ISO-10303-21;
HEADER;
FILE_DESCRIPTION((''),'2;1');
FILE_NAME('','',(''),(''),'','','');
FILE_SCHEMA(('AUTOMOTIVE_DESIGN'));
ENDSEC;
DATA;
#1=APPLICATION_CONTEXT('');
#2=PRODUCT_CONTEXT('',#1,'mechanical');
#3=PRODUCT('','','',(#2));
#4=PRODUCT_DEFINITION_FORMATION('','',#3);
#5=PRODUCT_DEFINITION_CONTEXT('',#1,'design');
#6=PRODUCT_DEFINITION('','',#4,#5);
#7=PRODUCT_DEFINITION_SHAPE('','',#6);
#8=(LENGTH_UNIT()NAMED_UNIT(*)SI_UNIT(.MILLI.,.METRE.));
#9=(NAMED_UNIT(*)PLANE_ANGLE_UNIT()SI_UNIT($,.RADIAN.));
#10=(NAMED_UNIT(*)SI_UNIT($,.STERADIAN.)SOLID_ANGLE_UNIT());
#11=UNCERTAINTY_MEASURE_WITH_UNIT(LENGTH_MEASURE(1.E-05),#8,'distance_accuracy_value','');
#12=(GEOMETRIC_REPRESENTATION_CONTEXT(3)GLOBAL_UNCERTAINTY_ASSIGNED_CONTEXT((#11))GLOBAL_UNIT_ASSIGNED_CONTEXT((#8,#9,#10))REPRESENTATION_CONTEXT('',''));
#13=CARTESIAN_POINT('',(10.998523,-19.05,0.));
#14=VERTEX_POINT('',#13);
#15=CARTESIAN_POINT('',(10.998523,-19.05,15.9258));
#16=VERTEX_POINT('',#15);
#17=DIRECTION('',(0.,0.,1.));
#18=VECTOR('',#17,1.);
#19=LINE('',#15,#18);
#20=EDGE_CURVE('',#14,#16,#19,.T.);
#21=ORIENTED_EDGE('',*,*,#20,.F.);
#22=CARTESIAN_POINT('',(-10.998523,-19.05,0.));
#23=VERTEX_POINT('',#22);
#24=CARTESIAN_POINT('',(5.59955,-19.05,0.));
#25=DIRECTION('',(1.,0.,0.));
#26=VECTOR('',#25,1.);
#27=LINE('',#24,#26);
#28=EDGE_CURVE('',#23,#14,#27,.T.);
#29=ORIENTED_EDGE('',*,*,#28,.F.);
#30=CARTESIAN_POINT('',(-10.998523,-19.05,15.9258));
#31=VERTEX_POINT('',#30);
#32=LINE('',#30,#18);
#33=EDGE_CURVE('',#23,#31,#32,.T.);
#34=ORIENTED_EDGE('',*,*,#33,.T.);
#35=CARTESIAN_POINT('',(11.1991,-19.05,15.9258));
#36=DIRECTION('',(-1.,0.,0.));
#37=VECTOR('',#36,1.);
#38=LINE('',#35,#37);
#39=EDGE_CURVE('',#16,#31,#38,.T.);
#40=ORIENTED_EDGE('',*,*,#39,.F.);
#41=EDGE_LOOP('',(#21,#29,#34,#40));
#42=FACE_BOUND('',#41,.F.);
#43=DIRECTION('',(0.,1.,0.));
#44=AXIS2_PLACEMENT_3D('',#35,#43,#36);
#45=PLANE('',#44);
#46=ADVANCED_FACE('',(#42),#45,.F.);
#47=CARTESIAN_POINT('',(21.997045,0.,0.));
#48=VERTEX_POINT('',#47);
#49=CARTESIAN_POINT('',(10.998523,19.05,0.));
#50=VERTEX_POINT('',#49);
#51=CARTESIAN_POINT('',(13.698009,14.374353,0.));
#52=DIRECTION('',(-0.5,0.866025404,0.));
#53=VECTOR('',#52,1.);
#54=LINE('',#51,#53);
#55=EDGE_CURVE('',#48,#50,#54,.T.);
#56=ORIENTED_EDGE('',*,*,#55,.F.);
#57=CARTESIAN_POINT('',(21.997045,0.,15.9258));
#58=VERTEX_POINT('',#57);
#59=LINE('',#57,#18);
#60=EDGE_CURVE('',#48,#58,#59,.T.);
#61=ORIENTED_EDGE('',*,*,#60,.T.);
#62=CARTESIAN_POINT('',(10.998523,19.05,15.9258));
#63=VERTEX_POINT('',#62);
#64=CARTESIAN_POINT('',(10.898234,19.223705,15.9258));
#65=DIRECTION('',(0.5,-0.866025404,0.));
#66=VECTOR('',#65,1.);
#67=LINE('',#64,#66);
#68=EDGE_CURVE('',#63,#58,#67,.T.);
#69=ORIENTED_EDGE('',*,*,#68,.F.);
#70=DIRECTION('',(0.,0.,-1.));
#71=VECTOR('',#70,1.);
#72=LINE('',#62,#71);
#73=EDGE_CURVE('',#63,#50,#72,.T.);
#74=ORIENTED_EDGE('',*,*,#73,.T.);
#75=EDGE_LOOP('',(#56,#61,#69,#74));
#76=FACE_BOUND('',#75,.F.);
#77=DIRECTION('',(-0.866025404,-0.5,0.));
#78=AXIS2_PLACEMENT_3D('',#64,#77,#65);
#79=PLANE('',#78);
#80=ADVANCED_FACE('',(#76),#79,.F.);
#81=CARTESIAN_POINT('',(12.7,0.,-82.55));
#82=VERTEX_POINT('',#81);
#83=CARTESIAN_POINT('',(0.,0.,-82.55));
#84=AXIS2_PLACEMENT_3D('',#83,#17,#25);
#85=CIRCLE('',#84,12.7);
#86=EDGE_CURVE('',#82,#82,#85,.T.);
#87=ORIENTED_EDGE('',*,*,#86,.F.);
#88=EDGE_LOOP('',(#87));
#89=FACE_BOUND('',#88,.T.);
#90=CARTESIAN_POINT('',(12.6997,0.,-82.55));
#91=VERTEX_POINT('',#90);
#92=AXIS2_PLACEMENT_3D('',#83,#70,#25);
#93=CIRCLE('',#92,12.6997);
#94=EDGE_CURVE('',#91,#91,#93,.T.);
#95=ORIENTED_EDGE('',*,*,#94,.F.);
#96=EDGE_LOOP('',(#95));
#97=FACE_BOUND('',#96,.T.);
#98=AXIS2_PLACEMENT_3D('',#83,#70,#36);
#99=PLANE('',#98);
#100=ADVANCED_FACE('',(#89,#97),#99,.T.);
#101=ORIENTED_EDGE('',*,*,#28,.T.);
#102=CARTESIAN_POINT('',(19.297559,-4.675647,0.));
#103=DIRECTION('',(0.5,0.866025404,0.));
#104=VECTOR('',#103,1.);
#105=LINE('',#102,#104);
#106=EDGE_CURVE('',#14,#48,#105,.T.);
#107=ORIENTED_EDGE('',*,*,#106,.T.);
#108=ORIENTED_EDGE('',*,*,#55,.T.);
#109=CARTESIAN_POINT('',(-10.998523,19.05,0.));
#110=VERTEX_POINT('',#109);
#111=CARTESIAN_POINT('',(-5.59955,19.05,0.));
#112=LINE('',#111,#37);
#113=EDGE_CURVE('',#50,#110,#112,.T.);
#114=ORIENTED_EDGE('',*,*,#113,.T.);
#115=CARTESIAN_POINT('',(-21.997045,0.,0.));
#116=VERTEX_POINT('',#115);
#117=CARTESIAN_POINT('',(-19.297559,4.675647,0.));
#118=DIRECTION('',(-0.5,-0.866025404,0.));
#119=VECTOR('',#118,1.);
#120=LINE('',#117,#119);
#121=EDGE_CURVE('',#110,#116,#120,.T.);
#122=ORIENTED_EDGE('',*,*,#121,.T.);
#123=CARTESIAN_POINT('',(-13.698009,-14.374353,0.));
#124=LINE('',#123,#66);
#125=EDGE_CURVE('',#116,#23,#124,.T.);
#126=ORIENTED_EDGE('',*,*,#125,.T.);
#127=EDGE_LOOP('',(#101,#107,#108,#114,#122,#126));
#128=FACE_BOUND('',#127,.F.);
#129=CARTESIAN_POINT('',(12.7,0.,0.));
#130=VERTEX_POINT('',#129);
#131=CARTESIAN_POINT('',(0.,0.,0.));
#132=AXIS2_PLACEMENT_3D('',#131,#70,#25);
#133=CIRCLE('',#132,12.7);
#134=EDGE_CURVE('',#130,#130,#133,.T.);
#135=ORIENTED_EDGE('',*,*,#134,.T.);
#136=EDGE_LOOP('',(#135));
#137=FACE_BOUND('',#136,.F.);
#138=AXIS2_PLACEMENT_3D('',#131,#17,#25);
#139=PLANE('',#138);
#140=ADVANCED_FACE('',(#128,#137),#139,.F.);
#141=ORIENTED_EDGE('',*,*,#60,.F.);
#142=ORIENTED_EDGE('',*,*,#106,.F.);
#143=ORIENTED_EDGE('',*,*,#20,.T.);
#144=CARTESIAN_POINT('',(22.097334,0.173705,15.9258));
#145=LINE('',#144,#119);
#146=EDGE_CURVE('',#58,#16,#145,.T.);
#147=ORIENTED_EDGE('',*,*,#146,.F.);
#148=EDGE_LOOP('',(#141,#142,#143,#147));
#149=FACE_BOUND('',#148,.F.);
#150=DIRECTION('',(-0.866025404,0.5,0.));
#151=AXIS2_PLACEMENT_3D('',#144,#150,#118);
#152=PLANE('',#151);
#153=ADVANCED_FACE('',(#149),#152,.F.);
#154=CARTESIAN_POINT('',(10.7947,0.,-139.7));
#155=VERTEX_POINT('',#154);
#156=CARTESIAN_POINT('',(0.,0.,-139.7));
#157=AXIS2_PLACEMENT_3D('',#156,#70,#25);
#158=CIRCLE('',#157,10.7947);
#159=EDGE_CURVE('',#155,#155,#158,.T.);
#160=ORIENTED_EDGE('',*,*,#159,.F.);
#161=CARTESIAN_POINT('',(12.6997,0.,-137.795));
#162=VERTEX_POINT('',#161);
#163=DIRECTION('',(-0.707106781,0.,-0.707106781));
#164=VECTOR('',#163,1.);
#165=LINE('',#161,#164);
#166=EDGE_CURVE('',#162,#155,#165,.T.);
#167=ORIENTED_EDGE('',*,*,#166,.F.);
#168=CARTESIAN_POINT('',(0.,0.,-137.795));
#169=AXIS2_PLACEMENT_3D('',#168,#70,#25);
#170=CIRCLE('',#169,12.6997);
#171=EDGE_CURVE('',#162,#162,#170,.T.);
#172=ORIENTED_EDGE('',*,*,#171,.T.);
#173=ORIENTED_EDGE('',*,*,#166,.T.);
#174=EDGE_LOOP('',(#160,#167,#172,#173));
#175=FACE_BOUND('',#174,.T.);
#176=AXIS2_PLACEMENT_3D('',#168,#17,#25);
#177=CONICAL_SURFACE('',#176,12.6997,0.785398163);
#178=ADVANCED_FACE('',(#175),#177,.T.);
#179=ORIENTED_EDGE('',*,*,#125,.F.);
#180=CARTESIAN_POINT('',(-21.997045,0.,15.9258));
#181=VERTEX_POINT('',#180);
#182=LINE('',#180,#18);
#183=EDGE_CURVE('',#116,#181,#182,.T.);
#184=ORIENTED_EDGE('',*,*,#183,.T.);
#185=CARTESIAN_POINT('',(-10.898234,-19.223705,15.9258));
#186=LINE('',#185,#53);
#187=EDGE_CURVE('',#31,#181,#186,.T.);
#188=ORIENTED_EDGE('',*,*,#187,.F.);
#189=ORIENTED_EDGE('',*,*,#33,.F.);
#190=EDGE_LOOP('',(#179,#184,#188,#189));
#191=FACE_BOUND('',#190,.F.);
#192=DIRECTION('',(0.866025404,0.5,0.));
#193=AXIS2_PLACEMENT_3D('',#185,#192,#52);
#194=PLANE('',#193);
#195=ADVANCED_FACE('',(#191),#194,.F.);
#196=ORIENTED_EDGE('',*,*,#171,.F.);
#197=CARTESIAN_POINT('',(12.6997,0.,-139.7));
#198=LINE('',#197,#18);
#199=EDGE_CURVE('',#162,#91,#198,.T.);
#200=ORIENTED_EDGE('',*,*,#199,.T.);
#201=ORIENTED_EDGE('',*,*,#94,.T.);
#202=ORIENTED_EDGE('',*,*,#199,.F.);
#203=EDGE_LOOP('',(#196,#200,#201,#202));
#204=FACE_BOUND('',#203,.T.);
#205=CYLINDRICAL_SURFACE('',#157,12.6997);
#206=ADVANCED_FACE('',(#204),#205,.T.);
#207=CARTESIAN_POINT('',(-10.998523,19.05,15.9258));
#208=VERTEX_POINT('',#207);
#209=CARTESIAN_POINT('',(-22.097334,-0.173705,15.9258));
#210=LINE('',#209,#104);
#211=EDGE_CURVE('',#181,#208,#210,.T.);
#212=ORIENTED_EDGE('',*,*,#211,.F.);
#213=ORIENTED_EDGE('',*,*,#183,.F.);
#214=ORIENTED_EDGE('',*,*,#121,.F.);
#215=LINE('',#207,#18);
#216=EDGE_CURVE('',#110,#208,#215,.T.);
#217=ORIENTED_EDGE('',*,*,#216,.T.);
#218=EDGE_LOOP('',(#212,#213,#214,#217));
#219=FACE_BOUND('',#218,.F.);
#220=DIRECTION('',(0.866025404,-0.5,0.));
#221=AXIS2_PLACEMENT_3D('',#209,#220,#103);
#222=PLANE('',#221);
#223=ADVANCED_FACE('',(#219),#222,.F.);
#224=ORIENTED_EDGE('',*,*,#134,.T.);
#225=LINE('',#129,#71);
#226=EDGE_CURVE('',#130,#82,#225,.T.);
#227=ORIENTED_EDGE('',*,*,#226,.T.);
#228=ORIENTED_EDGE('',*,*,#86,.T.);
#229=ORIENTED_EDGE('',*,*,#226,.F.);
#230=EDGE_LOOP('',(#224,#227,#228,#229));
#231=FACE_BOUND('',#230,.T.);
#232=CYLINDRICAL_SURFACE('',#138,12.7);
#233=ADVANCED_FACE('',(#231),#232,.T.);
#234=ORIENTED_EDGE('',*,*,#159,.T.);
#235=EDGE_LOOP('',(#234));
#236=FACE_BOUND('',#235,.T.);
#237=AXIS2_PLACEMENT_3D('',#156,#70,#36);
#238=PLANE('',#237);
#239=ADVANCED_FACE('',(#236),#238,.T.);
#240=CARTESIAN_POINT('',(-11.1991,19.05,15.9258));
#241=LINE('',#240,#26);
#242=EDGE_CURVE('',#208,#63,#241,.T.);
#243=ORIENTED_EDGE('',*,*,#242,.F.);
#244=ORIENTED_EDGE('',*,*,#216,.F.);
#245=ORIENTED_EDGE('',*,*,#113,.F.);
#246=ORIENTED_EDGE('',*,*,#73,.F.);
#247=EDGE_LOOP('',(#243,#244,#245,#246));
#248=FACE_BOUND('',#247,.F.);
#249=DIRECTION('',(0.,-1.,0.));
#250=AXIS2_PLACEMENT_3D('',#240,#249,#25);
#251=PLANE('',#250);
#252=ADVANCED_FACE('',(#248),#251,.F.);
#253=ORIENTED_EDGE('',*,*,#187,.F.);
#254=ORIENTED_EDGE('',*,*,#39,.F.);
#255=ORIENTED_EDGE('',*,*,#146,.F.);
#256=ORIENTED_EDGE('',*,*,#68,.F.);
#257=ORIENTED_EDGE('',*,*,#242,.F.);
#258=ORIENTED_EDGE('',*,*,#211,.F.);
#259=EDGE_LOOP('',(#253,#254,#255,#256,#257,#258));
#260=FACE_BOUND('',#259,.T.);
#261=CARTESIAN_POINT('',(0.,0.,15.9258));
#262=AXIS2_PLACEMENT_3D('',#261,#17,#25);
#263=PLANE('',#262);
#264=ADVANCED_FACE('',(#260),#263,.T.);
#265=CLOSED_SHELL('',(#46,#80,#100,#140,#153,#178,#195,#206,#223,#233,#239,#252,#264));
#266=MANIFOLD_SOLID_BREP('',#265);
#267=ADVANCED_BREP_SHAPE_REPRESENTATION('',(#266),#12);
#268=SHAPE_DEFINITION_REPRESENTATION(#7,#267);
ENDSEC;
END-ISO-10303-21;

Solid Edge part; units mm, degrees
sketch "Sketch1" plane through (0, 0, 0) normal (0, 0, 1) x (1, 0, 0)
  circle A0 centre (0, 0) radius 22.098
  dimension "D1" = 44.196
extrude "Protrusion1" add sketch "Sketch1" along normal blind 15.9258
sketch "Sketch2" plane through (0, 0, 0) normal (0, 0, -1) x (1, 0, 0)
  circle A0 centre (0, 0) radius 12.7
extrude "Protrusion2" add sketch "Sketch2" along normal blind 139.7
sketch "Sketch3" plane through (0, 0, -139.7) normal (0, 0, -1) x (1, 0, 0)
  circle A0 centre (0, 0) radius 12.6997
extrude "Cutout1" cut sketch "Sketch3" against normal blind 57.15 flip side to cut
chamfer "Chamfer_1" distance 1.905 angle 45 1 edges at (-12.6997, 0, -139.7)
sketch "Sketch4" plane through (0, 0, 15.9258) normal (0, 0, 1) x (1, 0, 0)
  line L0 (-11.1991, 19.05) -> (11.1991, 19.05)
  dimension "D1" = 38.1
extrude "Cutout2" cut sketch "Sketch4" against normal up to next material side at (0, 19.1, 15.9258)
pattern_circular "Pattern1" count 6 over 360 about axis through (0, 0, 15.9258) along (0, 0, 1) of "Cutout2"
properties part number "24106926"
